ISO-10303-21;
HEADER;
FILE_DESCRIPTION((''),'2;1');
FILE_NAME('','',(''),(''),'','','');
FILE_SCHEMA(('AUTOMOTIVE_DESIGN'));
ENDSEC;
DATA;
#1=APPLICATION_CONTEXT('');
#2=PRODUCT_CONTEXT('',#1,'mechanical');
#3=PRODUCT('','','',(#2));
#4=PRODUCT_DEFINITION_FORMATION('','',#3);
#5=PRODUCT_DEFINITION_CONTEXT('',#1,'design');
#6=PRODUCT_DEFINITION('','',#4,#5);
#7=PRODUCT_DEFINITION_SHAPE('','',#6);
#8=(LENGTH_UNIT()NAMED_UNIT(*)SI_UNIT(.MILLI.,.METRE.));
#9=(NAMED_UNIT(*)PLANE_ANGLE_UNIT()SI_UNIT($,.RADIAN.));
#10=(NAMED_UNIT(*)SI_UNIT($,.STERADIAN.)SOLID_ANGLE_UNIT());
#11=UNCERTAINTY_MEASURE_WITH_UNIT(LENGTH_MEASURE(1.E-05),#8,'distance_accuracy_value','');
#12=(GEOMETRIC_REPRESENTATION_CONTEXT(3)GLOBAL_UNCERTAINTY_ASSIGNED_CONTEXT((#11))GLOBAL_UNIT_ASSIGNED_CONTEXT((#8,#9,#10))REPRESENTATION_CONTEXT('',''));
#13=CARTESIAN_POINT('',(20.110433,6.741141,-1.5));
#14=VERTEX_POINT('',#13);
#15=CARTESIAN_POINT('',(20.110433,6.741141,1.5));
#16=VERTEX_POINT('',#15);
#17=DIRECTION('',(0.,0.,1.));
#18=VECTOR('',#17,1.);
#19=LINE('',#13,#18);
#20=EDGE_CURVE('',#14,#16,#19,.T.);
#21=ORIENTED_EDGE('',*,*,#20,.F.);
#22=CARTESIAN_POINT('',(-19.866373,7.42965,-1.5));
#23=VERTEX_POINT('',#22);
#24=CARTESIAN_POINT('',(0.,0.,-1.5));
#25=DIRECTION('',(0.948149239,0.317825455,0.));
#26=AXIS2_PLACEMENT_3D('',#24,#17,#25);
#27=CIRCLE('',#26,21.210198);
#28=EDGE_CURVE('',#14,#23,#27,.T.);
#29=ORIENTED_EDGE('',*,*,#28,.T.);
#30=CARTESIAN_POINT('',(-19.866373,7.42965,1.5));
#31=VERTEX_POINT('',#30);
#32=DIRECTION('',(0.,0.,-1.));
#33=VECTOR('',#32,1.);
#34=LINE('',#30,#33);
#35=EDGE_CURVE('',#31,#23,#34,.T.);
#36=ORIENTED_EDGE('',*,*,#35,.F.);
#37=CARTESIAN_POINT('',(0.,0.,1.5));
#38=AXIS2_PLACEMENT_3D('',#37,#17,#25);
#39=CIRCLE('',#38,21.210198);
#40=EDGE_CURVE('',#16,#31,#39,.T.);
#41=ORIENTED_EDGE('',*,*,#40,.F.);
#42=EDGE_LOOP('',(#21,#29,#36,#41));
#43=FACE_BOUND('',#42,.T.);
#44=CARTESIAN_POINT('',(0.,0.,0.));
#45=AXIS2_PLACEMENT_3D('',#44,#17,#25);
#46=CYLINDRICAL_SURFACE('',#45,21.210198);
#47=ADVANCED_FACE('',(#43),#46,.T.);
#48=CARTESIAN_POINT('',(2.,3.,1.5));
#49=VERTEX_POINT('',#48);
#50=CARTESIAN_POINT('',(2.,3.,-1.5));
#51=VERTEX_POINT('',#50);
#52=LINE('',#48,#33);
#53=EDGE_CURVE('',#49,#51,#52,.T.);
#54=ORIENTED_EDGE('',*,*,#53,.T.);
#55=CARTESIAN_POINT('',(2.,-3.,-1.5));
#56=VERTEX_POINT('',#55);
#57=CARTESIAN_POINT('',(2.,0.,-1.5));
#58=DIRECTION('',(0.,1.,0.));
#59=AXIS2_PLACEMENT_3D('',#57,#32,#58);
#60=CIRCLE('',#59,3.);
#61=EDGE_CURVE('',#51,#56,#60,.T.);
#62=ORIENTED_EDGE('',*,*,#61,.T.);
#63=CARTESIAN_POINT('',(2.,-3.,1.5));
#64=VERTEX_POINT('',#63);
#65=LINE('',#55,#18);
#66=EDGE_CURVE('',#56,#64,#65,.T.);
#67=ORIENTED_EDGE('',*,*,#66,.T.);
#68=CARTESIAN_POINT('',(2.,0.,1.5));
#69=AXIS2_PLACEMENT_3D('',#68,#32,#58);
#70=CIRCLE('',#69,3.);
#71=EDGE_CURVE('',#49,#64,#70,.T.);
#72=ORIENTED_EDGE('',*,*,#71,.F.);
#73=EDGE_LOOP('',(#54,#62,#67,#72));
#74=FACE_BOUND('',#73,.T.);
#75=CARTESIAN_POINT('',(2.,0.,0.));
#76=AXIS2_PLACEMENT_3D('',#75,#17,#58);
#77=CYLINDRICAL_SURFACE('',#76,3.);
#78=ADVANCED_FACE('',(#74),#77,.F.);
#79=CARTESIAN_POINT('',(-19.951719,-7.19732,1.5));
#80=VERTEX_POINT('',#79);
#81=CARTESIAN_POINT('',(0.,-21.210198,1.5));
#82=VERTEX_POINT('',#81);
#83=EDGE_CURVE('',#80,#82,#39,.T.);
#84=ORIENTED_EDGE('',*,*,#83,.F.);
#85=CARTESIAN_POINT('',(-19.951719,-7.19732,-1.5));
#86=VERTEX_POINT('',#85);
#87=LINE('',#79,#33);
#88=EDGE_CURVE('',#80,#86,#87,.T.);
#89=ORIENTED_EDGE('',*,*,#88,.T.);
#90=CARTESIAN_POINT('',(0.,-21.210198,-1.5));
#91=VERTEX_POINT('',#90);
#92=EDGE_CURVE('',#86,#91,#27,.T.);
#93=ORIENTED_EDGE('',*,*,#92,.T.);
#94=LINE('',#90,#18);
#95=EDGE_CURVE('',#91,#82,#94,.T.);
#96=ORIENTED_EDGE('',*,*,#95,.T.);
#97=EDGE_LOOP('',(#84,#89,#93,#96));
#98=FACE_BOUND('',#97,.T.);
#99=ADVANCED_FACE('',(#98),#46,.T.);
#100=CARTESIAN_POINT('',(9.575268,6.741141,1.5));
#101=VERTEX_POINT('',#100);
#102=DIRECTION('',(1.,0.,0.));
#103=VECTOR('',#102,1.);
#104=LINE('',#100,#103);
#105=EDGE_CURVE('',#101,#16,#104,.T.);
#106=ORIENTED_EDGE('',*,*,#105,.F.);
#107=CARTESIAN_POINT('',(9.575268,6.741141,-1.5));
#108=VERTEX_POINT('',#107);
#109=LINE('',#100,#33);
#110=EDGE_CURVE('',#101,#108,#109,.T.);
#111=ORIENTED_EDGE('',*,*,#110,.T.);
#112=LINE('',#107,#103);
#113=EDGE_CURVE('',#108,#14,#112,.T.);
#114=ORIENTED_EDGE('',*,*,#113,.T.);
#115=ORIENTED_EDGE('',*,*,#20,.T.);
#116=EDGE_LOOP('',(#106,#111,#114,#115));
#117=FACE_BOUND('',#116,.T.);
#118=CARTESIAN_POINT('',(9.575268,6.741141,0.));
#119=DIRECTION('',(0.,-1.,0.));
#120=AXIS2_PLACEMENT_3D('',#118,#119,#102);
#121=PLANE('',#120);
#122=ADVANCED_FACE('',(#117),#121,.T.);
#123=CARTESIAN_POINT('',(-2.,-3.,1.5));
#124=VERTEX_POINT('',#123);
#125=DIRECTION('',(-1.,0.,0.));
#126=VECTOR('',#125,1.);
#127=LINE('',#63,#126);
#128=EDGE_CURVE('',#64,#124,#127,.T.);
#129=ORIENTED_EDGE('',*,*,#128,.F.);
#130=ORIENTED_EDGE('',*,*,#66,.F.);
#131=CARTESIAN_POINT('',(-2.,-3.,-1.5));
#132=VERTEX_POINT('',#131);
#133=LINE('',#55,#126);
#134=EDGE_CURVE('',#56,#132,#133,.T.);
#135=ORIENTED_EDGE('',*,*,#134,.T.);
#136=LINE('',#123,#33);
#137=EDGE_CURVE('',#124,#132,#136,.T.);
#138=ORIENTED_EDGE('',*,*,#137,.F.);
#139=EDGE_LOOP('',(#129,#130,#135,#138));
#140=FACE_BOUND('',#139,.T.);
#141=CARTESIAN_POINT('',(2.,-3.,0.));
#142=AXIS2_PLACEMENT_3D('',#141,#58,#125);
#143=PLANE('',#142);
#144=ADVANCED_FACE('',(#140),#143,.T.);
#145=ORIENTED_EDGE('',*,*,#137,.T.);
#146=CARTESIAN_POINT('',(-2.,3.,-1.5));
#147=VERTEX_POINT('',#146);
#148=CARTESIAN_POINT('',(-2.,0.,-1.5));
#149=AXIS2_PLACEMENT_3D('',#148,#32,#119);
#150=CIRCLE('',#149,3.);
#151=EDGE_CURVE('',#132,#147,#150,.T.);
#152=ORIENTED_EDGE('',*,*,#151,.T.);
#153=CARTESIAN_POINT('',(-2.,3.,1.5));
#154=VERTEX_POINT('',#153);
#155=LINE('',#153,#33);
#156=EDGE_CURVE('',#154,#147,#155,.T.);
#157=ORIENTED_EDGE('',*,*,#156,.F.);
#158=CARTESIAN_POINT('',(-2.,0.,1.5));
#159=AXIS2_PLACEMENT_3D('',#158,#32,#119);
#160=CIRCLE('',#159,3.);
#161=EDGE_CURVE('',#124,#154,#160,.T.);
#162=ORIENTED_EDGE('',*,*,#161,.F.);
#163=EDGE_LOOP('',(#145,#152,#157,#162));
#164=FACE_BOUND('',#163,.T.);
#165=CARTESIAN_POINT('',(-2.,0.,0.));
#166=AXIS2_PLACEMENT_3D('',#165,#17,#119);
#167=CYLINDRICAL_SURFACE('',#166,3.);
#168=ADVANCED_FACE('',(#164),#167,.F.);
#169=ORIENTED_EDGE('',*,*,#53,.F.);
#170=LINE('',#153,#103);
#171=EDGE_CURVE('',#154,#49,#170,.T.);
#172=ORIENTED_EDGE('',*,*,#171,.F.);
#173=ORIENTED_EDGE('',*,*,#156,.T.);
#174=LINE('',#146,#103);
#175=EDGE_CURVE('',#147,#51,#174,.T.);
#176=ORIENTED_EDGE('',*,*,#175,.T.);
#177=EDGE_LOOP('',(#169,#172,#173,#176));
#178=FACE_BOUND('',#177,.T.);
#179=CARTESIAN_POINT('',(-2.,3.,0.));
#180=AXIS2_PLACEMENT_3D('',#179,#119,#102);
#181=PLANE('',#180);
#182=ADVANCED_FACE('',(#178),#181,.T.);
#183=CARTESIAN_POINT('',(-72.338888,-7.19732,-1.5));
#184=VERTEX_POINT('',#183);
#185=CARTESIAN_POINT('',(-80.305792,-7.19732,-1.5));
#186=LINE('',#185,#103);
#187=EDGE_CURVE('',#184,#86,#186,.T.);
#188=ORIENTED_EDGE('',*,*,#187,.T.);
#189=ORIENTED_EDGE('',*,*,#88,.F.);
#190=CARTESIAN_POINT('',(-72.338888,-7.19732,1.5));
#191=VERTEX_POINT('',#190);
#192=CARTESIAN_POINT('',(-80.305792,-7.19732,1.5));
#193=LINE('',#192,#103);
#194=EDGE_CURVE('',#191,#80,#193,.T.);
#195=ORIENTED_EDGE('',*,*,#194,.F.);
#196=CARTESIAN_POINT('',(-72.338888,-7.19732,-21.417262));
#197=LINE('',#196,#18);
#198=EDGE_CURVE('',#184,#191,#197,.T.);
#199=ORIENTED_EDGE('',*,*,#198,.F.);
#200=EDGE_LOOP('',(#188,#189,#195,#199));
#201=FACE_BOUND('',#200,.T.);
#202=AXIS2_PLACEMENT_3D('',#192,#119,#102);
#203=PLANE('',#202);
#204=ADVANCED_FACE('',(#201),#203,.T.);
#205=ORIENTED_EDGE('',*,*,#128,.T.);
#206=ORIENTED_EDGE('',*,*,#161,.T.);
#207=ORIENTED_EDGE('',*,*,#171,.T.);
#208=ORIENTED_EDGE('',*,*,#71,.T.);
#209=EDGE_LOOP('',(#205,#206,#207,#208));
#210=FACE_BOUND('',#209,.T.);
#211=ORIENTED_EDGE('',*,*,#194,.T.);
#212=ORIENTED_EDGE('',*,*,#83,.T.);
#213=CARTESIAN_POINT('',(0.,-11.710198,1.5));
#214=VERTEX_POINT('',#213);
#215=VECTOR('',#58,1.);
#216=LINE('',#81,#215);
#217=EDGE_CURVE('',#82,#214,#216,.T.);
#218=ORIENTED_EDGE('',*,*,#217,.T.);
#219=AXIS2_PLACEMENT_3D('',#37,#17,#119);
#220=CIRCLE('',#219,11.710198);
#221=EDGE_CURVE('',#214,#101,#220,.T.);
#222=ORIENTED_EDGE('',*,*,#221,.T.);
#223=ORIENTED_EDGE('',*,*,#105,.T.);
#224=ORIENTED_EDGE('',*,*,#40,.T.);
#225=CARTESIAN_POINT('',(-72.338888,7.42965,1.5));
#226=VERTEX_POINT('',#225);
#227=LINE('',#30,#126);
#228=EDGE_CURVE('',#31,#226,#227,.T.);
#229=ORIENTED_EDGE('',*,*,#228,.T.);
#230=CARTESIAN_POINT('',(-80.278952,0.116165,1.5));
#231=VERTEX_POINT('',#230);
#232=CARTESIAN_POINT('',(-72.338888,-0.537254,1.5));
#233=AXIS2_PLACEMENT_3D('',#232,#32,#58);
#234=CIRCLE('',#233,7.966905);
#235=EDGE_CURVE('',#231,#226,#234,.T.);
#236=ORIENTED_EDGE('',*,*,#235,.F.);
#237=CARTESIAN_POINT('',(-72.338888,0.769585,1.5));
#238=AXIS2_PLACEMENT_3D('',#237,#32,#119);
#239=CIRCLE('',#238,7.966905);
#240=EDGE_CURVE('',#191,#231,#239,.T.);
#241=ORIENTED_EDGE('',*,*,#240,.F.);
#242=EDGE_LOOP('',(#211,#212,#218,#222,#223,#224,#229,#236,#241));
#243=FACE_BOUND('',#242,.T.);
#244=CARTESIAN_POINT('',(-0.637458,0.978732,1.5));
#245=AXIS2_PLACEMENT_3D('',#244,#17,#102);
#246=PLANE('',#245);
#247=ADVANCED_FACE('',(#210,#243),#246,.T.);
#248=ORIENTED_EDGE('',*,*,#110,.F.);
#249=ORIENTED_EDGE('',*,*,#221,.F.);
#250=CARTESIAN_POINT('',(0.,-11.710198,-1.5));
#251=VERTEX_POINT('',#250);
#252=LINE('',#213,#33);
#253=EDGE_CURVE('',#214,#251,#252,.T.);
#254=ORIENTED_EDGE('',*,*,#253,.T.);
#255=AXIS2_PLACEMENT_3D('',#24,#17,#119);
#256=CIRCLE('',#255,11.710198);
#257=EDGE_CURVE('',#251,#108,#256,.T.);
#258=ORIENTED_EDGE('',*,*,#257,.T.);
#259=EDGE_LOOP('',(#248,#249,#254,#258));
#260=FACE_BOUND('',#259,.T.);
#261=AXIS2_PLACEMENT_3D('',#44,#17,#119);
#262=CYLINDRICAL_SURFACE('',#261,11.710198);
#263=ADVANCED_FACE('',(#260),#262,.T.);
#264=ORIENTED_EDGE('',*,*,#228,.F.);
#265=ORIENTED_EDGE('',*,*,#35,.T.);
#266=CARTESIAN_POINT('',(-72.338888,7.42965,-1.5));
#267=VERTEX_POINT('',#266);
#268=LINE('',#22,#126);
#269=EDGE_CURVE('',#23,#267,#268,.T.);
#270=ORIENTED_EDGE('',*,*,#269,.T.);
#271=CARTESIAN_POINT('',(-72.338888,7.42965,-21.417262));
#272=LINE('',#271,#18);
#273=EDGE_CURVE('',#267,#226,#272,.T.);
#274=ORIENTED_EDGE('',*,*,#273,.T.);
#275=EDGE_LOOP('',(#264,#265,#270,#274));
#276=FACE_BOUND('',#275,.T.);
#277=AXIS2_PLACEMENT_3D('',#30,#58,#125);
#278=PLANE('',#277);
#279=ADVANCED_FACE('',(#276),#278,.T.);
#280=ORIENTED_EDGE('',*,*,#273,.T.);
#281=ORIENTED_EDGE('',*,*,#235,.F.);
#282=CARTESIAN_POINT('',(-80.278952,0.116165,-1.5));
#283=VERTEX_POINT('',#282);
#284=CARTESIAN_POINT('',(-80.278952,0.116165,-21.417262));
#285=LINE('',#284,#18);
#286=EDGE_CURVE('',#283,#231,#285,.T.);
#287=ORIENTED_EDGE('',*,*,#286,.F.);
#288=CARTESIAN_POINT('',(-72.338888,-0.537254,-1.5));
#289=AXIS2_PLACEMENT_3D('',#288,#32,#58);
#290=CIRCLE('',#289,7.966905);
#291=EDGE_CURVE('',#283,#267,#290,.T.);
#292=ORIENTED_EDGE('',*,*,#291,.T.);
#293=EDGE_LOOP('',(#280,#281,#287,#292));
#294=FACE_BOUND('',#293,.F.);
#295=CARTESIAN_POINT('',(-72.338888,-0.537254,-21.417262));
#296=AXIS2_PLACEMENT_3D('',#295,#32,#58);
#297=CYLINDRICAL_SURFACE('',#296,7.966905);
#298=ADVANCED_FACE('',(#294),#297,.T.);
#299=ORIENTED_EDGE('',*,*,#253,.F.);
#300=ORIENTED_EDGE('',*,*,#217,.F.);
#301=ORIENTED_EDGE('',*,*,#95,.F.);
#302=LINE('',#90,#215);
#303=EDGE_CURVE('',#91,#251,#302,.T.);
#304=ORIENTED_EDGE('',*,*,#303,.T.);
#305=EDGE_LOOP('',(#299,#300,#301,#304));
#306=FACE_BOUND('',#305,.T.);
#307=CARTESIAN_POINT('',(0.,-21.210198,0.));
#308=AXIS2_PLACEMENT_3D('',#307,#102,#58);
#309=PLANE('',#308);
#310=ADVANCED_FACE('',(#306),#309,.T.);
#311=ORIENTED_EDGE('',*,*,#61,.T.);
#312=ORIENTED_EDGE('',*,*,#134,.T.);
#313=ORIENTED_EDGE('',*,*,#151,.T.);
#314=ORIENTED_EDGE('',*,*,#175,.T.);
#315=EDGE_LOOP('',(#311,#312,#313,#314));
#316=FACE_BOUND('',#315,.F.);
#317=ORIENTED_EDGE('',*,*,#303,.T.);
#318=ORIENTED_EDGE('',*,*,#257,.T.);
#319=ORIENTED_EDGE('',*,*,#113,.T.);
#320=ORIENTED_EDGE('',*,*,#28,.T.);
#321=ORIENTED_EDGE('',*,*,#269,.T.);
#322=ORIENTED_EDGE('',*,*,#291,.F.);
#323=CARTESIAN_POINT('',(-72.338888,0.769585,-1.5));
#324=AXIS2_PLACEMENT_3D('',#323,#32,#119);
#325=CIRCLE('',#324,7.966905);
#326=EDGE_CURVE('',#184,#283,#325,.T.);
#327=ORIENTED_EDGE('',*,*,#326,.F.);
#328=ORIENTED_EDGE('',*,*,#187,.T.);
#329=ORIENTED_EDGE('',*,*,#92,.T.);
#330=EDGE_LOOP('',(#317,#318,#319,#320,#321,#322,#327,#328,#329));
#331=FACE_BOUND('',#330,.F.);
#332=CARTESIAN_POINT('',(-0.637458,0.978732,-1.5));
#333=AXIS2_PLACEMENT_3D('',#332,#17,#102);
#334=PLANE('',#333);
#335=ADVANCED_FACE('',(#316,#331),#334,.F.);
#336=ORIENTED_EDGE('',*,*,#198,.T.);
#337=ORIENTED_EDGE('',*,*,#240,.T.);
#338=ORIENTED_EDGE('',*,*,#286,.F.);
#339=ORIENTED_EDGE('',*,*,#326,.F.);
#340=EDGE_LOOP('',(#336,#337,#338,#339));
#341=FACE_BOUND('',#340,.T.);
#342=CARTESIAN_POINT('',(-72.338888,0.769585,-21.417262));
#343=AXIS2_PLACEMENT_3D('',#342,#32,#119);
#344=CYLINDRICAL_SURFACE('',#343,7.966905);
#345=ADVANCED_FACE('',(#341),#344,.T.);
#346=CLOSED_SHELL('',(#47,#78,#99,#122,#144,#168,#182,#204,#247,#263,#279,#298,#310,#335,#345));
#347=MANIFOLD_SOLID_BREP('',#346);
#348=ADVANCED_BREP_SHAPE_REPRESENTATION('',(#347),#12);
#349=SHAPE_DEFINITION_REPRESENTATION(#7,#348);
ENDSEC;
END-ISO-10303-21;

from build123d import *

# Parameters (mm, degrees)
F1_DEPTH    = 1.5
F3_DEPTH    = 3
F4_T1_DEPTH = 42.8345237792


# Not quite as in the source:
# - a fillet or chamfer that OpenCascade refuses, or shapes differently, is made with other operations: its cross-section is extruded or revolved along the edge and cut away or added


with BuildPart() as f1:
    # F0 (on Top) → F1 (new body, symmetric)
    with BuildSketch(Plane.XY):
        with BuildLine():
            Line((9.5752676601, 6.7411407109), (20.1104327648, 6.7411407109))
            ThreePointArc((20.1104327648, 6.7411407109), (-17.2170469432, 12.3873233035), (0, -21.2101976434))
            Line((0, -21.2101976434), (0, -11.7101976434))
            ThreePointArc((0, -11.7101976434), (10.3939602393, -5.3939150337), (9.5752676601, 6.7411407109))
        make_face()
        with BuildLine():
            Line((2, -3), (-2, -3))
            ThreePointArc((-2, -3), (-5, 0), (-2, 3))
            Line((-2, 3), (2, 3))
            ThreePointArc((2, 3), (5, 0), (2, -3))
        make_face(mode=Mode.SUBTRACT)
    extrude(amount=F1_DEPTH, both=True)

    # F2 (on face) → F3 (join)
    with BuildSketch(Plane.XY.offset(1.5)):
        with BuildLine():
            ThreePointArc((-19.9517186141, -7.19731953), (-21.2098366027, 0.1237552257), (-19.8663731217, 7.4296502651))
            Line((-19.8663731217, 7.4296502651), (-80.3057924461, 7.4296502651))
            Line((-80.3057924461, 7.4296502651), (-80.3057924461, -7.19731953))
            Line((-80.3057924461, -7.19731953), (-19.9517186141, -7.19731953))
        make_face()
    extrude(amount=-F3_DEPTH)

    # F4: fillet of radius 7.9669047558 on 2 edges, made by hand

    # F4_s2 → F4_t1 (cut)
    with BuildSketch(Plane.XY.offset(-21.4172618896)):
        with BuildLine():
            ThreePointArc((-72.3388876903, -7.19731953), (-77.9723400682, -4.863867152), (-80.3057924461, 0.7695852259))
            Line((-80.3057924461, 0.7695852259), (-80.3057924461, -7.19731953))
            Line((-80.3057924461, -7.19731953), (-72.3388876903, -7.19731953))
        make_face()
        with BuildLine():
            ThreePointArc((-72.3388876903, 7.4296502651), (-77.9723400682, 5.0961978872), (-80.3057924461, -0.5372544907))
            Line((-80.3057924461, -0.5372544907), (-80.3057924461, 7.4296502651))
            Line((-80.3057924461, 7.4296502651), (-72.3388876903, 7.4296502651))
        make_face()
    extrude(amount=F4_T1_DEPTH, mode=Mode.SUBTRACT)


solid = f1.part
